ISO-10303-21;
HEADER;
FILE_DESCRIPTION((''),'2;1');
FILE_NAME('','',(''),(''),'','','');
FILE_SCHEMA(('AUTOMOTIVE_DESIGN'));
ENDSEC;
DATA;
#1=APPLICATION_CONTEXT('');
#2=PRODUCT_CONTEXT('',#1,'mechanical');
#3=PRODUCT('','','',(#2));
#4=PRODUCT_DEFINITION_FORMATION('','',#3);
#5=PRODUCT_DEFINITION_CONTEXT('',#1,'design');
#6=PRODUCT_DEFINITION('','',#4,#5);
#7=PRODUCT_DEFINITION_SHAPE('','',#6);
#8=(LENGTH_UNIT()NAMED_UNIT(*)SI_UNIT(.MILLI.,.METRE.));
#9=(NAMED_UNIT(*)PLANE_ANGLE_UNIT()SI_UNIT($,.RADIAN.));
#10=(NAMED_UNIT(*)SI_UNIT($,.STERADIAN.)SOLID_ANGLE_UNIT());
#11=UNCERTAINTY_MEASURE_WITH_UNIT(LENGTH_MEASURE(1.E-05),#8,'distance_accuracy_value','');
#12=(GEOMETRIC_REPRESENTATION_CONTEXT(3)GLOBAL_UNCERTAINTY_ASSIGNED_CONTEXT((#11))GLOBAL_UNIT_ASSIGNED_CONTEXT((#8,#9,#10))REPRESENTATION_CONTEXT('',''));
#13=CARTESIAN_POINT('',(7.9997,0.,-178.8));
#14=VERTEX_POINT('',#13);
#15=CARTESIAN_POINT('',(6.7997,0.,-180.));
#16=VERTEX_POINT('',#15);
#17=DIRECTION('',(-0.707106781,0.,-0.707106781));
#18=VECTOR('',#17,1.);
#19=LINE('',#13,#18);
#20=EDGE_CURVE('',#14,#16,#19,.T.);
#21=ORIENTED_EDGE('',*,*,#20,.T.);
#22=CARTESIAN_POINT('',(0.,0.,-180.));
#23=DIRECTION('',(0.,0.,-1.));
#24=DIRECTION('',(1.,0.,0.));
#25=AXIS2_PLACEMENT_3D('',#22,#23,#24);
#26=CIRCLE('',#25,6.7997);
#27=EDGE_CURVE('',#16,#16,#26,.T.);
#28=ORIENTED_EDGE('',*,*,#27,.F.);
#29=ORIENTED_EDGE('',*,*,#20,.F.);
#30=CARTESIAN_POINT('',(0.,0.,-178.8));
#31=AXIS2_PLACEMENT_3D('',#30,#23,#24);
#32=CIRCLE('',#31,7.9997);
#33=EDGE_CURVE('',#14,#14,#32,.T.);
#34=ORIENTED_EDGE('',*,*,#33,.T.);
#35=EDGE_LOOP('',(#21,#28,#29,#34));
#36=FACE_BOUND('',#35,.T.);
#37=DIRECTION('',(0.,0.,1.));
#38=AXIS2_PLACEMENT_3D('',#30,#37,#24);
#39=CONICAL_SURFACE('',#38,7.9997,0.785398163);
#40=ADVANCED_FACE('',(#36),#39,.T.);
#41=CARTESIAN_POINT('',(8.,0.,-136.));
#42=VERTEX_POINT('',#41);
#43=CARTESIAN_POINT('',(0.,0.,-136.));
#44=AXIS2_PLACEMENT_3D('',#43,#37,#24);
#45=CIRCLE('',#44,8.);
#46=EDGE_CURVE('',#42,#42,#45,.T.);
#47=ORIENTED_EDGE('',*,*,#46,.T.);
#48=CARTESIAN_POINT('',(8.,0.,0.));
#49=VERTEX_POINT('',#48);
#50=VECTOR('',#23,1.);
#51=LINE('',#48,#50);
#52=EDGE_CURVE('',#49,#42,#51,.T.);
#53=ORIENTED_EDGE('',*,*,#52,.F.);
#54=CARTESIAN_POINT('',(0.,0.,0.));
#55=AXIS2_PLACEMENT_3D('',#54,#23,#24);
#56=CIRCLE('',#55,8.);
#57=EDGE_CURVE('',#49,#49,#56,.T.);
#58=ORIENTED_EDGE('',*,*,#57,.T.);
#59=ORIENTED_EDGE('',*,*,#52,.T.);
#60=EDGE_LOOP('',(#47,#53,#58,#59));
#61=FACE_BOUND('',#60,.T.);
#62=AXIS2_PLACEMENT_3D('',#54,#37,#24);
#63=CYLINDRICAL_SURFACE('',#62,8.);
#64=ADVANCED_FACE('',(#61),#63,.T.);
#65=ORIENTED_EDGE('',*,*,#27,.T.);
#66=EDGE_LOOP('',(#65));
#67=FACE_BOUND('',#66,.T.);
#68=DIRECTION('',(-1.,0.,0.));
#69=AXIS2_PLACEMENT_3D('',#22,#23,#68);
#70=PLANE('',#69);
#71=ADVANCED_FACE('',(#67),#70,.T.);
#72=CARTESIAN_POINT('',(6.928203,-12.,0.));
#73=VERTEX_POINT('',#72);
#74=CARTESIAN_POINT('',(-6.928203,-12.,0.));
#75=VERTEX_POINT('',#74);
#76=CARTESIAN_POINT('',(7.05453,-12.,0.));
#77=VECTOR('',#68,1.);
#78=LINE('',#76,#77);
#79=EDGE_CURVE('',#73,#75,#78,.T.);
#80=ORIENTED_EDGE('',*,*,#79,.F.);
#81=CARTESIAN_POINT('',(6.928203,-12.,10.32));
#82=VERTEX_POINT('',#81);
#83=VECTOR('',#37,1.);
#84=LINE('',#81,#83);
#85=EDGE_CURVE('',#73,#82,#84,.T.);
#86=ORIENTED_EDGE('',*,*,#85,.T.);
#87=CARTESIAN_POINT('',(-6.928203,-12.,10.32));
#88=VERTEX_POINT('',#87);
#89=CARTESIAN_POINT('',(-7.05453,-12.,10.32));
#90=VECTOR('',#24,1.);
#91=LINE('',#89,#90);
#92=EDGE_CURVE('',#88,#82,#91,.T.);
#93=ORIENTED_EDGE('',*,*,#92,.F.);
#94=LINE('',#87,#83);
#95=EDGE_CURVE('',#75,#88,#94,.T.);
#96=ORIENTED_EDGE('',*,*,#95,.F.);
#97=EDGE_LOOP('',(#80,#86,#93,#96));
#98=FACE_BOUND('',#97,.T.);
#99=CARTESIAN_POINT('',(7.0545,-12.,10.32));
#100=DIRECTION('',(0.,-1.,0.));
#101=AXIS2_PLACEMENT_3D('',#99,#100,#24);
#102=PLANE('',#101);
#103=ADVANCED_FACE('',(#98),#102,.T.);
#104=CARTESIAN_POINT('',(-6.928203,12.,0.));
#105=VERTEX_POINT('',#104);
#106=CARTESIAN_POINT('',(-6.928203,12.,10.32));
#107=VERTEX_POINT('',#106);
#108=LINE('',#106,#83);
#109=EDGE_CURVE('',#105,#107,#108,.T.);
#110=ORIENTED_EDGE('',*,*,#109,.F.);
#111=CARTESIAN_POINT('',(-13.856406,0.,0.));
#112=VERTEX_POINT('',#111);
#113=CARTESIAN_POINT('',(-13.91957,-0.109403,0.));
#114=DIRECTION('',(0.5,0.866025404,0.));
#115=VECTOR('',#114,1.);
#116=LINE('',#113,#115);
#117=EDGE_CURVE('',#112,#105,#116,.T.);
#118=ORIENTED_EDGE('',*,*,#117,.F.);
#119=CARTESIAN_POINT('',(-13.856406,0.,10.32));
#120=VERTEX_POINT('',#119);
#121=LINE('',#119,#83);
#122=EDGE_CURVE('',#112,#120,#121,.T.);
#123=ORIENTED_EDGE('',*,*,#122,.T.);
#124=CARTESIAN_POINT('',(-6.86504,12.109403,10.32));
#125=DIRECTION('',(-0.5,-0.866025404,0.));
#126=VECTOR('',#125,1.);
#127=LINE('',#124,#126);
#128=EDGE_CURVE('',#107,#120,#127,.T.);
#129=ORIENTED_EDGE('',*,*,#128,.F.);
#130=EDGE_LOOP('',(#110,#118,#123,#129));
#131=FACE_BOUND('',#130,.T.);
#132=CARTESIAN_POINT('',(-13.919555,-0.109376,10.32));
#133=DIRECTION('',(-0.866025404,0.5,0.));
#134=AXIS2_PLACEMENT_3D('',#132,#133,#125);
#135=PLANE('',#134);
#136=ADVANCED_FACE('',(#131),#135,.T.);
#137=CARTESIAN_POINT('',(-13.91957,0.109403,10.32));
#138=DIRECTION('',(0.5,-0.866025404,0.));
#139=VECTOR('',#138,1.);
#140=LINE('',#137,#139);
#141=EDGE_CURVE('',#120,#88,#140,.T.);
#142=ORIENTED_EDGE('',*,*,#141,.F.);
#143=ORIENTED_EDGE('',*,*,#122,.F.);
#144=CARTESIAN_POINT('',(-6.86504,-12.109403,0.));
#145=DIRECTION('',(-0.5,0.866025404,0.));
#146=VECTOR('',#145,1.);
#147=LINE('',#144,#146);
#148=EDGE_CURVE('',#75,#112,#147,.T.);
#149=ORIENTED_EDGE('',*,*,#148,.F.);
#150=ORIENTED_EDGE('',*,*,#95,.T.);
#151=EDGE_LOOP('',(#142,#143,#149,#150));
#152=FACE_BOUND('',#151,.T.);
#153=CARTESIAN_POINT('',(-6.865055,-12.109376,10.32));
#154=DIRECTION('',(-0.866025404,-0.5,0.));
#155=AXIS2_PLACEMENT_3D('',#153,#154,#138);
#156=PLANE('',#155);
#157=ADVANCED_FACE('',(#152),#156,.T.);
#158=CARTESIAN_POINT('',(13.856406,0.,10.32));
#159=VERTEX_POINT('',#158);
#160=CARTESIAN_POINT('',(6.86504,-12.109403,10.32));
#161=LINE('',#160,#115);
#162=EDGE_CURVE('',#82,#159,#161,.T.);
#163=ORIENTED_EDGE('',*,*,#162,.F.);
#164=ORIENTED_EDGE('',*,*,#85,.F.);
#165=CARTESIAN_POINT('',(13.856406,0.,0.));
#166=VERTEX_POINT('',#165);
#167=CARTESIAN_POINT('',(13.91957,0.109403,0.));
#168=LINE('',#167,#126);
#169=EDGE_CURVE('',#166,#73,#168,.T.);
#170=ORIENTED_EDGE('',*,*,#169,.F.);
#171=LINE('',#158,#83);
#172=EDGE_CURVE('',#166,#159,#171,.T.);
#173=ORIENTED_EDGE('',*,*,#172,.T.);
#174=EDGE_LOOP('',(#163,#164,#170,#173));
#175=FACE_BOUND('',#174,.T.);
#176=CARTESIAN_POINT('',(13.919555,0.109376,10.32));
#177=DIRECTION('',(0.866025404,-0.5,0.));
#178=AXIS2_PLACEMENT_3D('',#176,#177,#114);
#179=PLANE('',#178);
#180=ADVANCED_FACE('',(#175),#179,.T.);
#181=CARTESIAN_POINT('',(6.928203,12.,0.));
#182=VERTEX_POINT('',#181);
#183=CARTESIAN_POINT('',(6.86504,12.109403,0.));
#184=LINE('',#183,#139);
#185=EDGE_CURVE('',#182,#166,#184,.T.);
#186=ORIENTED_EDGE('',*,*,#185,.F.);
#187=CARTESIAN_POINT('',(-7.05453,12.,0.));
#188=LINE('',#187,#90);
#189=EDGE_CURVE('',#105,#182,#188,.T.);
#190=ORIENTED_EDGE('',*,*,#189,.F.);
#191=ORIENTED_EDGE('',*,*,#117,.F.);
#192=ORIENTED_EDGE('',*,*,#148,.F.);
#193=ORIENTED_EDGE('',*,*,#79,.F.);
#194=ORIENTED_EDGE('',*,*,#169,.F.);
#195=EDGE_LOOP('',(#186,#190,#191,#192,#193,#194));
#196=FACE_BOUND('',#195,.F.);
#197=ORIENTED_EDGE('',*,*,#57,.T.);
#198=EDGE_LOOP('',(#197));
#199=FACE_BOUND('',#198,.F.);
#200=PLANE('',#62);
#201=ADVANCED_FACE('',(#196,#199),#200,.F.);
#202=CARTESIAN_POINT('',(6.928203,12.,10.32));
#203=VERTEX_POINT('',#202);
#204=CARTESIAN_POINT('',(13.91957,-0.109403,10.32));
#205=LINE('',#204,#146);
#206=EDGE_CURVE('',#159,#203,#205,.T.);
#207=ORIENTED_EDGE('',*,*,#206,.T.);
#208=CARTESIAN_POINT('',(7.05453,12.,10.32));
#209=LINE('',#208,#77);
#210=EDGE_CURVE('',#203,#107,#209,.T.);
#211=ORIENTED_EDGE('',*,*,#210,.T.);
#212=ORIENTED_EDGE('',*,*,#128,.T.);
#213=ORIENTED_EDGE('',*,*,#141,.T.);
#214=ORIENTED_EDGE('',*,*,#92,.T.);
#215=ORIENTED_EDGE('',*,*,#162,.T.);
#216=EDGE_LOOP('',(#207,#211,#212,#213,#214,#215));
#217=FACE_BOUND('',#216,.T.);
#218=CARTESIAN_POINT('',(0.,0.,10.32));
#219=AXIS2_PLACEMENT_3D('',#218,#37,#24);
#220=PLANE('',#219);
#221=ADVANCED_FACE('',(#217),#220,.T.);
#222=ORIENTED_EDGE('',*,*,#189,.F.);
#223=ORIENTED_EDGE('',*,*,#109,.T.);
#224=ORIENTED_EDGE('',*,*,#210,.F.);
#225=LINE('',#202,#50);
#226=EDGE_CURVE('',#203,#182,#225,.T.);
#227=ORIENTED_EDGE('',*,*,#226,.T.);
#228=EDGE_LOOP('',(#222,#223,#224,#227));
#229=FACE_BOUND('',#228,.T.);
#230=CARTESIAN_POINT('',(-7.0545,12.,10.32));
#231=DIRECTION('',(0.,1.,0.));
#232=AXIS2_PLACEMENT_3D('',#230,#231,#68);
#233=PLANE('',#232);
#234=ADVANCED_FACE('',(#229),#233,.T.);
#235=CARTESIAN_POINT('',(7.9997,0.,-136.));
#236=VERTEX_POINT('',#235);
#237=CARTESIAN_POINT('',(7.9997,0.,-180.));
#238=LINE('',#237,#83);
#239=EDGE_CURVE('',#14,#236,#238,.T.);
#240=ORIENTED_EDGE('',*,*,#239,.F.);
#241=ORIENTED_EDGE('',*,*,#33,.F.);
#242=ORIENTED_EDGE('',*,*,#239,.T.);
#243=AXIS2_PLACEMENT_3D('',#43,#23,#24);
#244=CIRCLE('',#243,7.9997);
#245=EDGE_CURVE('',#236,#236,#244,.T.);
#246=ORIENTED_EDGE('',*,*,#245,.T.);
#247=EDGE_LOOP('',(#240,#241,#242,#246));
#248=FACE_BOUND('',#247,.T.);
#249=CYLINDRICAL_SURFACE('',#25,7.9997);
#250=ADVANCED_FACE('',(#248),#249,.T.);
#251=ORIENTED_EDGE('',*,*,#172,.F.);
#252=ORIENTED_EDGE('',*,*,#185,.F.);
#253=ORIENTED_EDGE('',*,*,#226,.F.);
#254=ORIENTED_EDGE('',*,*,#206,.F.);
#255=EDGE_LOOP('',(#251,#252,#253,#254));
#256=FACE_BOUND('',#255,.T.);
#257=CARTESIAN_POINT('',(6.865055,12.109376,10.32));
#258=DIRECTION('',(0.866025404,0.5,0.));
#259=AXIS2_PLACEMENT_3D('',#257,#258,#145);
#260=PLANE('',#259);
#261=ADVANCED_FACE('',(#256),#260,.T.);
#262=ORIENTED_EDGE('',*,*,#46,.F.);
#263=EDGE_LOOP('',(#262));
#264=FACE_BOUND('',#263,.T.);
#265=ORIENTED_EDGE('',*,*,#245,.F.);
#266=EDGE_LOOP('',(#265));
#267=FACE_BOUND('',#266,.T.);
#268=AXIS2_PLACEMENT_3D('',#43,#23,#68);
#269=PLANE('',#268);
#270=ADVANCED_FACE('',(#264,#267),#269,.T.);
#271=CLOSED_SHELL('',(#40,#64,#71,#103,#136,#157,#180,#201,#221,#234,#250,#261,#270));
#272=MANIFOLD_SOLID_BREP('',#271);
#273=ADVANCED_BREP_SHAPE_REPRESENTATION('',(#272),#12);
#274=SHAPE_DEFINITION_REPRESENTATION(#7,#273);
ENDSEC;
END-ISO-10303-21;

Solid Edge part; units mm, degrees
sketch "Sketch1" plane through (0, 0, 0) normal (0, 0, 1) x (1, 0, 0)
  circle A0 centre (0, 0) radius 13.92
  dimension "D1" = 27.84
extrude "Protrusion1" add sketch "Sketch1" along normal blind 10.32
sketch "Sketch2" plane through (0, 0, 0) normal (0, 0, -1) x (1, 0, 0)
  circle A0 centre (0, 0) radius 8
extrude "Protrusion2" add sketch "Sketch2" along normal blind 180
sketch "Sketch3" plane through (0, 0, -180) normal (0, 0, -1) x (1, 0, 0)
  circle A0 centre (0, 0) radius 7.9997
extrude "Cutout1" cut sketch "Sketch3" against normal blind 44 flip side to cut
chamfer "Chamfer_1" distance 1.2 angle 45 1 edges at (-7.9997, 0, -180)
sketch "Sketch4" plane through (0, 0, 10.32) normal (0, 0, 1) x (1, 0, 0)
  line L0 (-7.0545, 12) -> (7.0545, 12)
  dimension "D1" = 24
extrude "Cutout2" cut sketch "Sketch4" against normal up to next material side at (0, 12.05, 10.32)
pattern_circular "Pattern1" count 6 over 360 about axis through (0, 0, 10.32) along (0, 0, 1) of "Cutout2"
properties part number "113603"
